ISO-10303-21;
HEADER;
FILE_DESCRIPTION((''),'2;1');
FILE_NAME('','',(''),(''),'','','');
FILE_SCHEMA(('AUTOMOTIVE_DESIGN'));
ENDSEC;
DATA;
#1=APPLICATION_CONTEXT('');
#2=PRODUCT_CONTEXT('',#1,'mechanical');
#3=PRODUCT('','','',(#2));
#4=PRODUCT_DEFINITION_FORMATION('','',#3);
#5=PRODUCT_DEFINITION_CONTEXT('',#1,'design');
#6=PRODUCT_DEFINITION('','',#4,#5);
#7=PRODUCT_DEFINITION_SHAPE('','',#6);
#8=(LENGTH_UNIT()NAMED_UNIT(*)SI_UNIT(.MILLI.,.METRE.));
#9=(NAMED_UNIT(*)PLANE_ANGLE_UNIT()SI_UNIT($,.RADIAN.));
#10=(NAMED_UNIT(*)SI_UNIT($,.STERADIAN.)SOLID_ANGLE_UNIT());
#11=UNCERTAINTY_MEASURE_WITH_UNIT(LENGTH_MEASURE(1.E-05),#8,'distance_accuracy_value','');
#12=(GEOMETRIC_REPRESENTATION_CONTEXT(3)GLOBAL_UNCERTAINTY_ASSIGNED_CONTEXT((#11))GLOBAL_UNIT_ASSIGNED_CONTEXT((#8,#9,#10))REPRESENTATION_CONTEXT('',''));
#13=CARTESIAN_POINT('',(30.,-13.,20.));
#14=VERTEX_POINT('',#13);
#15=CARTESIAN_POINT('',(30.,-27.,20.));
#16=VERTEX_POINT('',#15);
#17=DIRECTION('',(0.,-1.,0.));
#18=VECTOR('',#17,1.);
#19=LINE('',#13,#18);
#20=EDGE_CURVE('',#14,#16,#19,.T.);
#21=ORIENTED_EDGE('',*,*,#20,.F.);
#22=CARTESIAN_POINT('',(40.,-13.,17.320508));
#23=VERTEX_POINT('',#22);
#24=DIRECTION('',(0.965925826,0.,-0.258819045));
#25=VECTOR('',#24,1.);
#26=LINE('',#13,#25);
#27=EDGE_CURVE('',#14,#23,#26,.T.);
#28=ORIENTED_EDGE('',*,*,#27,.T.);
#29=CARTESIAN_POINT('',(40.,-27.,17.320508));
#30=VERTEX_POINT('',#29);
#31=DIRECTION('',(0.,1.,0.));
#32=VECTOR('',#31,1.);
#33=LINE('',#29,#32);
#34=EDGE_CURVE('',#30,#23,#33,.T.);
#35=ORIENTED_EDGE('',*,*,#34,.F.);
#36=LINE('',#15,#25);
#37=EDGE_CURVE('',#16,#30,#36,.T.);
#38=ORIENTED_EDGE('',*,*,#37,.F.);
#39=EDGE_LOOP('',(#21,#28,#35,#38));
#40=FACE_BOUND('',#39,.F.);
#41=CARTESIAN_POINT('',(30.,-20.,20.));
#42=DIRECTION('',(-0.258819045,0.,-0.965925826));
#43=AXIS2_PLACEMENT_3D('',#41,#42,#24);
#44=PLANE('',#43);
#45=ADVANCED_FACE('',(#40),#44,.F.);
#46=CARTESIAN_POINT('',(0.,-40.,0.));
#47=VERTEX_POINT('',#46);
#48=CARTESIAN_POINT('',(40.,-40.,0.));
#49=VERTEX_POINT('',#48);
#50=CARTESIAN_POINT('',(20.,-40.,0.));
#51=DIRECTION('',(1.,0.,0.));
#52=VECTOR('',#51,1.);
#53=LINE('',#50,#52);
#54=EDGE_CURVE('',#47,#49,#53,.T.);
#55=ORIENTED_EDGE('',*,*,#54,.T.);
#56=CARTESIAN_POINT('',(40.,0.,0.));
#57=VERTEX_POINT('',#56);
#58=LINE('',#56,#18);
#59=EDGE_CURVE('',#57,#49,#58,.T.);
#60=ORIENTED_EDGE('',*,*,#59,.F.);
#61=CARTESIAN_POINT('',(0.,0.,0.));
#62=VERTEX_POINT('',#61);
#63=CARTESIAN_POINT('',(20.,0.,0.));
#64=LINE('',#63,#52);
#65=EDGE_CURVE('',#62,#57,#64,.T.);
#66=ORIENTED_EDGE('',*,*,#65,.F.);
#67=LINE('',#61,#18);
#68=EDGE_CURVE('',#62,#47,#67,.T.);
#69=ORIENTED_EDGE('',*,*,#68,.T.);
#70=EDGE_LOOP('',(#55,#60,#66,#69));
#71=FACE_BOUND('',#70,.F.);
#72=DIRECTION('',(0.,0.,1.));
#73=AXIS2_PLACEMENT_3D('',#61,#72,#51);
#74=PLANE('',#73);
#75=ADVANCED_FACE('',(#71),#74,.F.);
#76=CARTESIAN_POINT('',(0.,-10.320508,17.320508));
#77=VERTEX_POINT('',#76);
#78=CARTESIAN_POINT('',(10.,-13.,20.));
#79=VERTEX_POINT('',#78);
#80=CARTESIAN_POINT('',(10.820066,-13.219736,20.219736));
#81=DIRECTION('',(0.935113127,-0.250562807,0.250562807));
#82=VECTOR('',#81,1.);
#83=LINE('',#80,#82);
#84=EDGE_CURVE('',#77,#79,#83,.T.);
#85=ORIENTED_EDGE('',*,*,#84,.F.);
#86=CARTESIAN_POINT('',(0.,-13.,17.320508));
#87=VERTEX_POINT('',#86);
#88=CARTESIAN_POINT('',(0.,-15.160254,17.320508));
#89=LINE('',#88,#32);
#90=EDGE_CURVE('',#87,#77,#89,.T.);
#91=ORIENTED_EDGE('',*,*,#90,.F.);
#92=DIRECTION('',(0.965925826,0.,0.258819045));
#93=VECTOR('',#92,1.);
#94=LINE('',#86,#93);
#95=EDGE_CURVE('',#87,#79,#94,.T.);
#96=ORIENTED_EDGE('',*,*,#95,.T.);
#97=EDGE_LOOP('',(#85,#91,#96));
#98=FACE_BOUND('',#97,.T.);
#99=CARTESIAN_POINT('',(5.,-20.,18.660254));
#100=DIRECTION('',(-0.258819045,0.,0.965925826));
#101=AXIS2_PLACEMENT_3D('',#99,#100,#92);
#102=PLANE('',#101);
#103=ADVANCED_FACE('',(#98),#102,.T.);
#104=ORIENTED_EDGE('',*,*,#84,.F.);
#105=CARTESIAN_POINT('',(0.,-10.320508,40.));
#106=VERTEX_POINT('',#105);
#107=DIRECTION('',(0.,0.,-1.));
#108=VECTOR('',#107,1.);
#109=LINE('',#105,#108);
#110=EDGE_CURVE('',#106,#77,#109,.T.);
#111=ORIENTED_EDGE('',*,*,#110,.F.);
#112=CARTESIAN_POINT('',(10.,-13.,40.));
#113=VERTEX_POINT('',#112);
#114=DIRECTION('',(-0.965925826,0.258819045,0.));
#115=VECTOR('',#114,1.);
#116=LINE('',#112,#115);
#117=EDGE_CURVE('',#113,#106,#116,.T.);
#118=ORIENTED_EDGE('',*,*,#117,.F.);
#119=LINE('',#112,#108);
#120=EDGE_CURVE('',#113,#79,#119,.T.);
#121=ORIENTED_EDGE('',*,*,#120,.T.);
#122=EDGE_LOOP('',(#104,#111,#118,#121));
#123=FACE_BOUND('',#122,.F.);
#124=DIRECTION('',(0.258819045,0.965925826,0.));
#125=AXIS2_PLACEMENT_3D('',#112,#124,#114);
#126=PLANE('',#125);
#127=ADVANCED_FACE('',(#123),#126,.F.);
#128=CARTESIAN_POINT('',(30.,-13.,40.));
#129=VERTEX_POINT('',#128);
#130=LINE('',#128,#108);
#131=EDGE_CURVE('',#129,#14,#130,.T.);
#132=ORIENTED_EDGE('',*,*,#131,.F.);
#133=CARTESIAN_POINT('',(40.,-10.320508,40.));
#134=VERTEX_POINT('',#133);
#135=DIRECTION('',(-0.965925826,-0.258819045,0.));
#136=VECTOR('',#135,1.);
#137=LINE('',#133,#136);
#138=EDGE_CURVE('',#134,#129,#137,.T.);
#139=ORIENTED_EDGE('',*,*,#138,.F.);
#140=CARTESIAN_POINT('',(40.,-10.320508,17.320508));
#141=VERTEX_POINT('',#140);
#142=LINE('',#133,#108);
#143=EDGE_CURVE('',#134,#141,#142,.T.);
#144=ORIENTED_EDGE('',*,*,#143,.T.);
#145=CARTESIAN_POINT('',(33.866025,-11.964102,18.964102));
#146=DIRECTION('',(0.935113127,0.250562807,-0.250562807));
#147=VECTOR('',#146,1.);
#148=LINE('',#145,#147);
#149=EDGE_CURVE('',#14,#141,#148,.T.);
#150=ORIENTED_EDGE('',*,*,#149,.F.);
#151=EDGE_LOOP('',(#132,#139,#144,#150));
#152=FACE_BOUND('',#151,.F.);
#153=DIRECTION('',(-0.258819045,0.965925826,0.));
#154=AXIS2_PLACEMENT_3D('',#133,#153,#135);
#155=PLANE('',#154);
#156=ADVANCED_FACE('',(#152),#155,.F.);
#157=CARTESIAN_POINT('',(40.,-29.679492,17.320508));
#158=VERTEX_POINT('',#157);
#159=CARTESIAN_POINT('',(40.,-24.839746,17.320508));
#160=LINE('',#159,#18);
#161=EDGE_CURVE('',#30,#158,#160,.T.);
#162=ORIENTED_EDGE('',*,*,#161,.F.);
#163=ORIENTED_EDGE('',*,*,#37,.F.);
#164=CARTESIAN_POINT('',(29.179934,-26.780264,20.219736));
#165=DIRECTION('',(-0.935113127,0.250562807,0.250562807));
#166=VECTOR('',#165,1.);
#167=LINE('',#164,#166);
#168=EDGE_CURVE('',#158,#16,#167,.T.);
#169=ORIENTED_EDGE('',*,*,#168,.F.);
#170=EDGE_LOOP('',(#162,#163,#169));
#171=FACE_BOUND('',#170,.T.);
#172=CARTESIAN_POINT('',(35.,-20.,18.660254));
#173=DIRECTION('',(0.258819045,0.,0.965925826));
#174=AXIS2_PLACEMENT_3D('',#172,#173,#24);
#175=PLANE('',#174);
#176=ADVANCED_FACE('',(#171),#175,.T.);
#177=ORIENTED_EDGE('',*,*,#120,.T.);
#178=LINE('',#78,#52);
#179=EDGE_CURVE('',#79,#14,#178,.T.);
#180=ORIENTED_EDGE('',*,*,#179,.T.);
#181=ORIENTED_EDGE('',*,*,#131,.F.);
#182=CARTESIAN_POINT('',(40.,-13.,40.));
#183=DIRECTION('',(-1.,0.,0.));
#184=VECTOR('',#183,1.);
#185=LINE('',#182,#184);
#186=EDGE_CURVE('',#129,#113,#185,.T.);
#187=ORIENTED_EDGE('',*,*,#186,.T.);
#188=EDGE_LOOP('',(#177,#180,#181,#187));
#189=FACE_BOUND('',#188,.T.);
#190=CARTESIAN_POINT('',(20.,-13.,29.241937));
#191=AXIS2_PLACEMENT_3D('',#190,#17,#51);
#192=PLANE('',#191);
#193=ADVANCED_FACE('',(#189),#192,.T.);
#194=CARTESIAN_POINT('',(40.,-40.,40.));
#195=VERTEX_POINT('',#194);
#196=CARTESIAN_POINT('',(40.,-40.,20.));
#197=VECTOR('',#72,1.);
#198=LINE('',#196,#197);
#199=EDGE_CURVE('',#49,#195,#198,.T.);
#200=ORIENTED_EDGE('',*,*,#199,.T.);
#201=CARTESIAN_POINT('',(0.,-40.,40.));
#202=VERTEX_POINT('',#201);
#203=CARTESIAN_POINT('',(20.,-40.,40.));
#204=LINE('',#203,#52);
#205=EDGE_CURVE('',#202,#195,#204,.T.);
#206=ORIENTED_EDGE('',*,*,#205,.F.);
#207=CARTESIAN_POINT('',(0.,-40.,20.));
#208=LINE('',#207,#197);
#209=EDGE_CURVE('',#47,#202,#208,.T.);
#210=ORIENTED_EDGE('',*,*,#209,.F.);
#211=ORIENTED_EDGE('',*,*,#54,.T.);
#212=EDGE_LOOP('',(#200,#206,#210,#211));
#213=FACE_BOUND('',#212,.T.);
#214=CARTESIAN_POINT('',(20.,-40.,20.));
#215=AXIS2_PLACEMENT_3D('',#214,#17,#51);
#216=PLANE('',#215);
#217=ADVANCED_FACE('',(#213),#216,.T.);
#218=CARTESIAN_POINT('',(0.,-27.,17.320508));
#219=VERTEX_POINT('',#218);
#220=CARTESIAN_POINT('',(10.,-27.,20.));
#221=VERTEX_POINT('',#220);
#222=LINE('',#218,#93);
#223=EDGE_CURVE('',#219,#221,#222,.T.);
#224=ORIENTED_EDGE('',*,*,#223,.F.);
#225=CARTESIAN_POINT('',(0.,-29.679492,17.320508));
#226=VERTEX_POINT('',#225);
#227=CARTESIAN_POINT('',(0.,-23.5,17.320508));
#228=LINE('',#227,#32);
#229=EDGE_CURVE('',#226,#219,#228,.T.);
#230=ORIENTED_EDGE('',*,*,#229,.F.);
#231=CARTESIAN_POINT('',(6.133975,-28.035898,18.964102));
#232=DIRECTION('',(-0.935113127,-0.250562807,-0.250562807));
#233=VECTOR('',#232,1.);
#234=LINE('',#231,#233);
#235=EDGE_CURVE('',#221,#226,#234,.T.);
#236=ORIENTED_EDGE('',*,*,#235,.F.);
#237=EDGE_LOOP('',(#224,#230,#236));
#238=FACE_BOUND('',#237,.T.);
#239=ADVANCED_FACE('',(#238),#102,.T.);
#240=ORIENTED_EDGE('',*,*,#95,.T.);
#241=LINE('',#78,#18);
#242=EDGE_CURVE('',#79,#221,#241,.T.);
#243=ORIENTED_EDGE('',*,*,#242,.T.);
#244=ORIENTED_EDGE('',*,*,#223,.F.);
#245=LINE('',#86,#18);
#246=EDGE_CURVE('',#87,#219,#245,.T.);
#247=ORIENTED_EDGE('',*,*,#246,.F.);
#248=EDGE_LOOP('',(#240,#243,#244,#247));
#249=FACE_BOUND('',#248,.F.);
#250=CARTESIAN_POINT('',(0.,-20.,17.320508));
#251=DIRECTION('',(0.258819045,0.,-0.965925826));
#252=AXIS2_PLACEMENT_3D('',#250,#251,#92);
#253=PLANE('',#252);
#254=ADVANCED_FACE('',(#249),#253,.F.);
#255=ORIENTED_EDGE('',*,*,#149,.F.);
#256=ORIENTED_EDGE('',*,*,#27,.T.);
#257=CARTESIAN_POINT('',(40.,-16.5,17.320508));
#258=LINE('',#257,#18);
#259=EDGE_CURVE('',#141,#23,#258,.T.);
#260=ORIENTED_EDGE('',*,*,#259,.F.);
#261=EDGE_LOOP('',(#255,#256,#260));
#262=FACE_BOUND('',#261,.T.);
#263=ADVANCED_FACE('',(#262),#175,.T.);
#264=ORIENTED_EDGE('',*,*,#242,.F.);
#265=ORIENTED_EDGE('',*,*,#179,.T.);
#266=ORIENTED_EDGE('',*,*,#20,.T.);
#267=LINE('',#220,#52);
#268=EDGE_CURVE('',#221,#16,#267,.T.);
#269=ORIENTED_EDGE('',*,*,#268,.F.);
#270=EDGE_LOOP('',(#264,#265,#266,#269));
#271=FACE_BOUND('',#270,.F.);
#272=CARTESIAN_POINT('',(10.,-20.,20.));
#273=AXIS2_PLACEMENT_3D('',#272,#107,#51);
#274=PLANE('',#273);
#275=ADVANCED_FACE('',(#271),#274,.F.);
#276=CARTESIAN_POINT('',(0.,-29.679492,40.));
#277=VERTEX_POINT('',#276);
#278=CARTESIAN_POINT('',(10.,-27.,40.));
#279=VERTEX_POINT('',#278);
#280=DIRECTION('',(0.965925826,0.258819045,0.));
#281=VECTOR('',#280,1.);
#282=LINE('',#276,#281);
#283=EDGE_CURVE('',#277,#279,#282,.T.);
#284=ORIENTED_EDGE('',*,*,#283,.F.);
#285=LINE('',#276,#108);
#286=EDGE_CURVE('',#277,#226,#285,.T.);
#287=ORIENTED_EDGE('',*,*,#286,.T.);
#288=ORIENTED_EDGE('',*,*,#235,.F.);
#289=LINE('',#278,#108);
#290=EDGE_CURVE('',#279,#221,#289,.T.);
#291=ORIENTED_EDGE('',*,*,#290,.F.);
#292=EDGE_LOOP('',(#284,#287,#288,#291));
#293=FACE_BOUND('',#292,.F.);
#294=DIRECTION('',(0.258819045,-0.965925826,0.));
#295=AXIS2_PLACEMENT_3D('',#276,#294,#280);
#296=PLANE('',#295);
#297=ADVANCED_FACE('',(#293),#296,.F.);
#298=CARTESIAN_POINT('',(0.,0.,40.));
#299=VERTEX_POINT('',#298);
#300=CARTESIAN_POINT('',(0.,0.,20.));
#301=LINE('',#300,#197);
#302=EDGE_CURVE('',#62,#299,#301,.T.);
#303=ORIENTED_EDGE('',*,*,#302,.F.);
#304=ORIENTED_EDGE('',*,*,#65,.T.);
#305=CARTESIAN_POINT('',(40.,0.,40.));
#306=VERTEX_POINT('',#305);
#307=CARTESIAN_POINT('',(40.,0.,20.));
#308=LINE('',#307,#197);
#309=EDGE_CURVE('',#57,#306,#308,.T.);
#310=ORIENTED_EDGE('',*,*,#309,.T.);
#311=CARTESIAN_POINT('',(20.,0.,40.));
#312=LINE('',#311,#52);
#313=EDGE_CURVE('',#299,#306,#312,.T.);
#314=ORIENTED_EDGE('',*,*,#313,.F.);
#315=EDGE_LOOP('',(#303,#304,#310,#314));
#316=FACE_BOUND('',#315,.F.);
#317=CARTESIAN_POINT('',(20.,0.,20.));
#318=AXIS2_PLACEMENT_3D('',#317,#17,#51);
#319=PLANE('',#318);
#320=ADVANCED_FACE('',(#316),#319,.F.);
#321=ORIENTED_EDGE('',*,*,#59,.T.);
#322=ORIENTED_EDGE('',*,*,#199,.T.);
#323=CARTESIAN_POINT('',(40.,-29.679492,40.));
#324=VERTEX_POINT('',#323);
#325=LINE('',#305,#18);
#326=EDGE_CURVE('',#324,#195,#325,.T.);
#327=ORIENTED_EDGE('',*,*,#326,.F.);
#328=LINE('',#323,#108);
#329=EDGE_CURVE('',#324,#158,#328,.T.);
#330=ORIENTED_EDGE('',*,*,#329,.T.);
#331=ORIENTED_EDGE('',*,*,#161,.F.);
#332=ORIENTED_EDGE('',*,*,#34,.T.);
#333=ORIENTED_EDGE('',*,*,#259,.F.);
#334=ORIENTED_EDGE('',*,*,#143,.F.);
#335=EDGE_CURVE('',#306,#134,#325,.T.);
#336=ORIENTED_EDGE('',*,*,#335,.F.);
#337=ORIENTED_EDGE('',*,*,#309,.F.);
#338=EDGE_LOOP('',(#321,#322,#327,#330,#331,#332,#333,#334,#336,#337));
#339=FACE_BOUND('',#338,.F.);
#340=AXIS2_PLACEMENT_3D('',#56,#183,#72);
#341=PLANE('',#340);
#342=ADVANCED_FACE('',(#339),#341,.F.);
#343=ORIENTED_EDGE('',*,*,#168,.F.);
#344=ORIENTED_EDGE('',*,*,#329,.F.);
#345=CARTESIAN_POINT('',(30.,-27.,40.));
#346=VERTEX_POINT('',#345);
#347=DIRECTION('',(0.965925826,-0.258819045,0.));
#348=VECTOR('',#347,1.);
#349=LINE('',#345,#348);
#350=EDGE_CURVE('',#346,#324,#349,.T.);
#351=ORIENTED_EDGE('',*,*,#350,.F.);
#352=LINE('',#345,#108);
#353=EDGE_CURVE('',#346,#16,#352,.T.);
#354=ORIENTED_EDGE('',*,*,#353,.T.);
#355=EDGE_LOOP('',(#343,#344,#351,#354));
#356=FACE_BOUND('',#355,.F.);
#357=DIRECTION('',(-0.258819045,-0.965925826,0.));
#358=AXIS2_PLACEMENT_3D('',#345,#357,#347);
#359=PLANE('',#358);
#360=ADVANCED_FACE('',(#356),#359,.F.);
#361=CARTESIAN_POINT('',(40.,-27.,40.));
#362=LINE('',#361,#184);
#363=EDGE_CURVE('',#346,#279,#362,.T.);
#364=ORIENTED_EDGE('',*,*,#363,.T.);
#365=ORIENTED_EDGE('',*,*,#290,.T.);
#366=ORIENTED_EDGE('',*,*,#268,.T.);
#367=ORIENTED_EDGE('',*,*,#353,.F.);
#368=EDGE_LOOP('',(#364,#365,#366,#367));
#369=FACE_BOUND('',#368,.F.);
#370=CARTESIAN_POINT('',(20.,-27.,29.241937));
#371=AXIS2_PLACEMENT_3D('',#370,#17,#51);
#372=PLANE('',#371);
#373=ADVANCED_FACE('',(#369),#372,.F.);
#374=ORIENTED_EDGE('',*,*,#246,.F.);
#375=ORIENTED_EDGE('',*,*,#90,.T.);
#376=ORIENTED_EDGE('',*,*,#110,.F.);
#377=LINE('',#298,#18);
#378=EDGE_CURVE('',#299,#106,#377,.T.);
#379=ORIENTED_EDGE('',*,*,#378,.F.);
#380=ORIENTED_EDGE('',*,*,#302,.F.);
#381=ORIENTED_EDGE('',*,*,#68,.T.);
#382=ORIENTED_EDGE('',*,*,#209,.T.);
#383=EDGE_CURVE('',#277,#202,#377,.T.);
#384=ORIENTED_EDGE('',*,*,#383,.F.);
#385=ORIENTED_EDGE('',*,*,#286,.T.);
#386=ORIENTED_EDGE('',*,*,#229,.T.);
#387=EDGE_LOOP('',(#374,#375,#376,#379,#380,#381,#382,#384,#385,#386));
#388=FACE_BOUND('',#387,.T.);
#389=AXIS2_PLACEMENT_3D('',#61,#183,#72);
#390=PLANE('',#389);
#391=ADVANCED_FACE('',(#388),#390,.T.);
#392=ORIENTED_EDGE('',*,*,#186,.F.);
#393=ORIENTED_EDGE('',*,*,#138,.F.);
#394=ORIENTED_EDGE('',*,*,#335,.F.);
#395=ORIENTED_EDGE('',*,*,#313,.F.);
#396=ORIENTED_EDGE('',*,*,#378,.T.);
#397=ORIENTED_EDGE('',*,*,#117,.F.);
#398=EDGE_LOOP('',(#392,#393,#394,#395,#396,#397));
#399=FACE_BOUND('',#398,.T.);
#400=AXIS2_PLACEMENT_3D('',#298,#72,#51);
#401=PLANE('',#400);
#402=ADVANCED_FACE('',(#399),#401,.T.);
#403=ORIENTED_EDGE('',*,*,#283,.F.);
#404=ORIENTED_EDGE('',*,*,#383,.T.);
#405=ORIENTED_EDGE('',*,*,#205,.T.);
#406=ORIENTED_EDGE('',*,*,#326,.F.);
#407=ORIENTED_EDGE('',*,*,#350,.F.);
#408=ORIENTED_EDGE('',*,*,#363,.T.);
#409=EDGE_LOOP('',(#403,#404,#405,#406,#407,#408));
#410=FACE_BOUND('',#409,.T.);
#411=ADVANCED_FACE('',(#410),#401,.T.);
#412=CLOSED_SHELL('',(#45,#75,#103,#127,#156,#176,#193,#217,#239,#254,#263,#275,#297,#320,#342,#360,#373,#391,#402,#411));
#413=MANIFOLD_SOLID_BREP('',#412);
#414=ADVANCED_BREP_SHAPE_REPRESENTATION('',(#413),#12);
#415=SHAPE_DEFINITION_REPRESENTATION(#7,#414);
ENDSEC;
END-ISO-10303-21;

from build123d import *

# Parameters (mm, degrees)
F0_W     = 40
F0_H     = 40
F1_DEPTH = 40
F4_DEPTH = 7
F6_REACH = 50.3537618041
F8_REACH = 50.3537618041


with BuildPart() as f1:
    # F0 (on Front) → F1 (new body)
    with BuildSketch(Plane.XZ):
        with Locations((20, 20)):
            Rectangle(F0_W, F0_H)
    extrude(amount=F1_DEPTH)

    # F3 (on offset) → F4 (cut, symmetric)
    with BuildSketch(Plane.XZ.offset(20)):
        Polygon((0, 40), (0, 17.3205080757), (10, 20), (30, 20), (40, 17.3205080757), (40, 40), align=None)
    extrude(amount=F4_DEPTH, both=True, mode=Mode.SUBTRACT)

    f6_end = Plane(origin=(5, -20, 18.6602540378), x_dir=(0.9659258263, 0, 0.2588190451), z_dir=(-0.2588190451, 0, 0.9659258263))
    # F5 (on face) → F6 (cut, up to a plane its end follows)
    with BuildSketch(Plane.XY.offset(40)):
        Polygon((10, -13), (0, -10.3205080757), (0, -13), align=None)
        Polygon((0, -27), (0, -29.6794919243), (10, -27), align=None)
    f6_long = extrude(amount=-F6_REACH, mode=Mode.PRIVATE)
    add(split(f6_long, bisect_by=f6_end, keep=Keep.TOP, mode=Mode.PRIVATE), mode=Mode.SUBTRACT)

    f8_end = Plane(origin=(35, -20, 18.6602540378), x_dir=(0.9659258263, 0, -0.2588190451), z_dir=(0.2588190451, 0, 0.9659258263))
    # F7 (on face) → F8 (cut, up to a plane its end follows)
    with BuildSketch(Plane.XY.offset(40)):
        Polygon((40, -10.3205080757), (30, -13), (40, -13), align=None)
        Polygon((40, -27), (30, -27), (40, -29.6794919243), align=None)
    f8_long = extrude(amount=-F8_REACH, mode=Mode.PRIVATE)
    add(split(f8_long, bisect_by=f8_end, keep=Keep.TOP, mode=Mode.PRIVATE), mode=Mode.SUBTRACT)


solid = f1.part
